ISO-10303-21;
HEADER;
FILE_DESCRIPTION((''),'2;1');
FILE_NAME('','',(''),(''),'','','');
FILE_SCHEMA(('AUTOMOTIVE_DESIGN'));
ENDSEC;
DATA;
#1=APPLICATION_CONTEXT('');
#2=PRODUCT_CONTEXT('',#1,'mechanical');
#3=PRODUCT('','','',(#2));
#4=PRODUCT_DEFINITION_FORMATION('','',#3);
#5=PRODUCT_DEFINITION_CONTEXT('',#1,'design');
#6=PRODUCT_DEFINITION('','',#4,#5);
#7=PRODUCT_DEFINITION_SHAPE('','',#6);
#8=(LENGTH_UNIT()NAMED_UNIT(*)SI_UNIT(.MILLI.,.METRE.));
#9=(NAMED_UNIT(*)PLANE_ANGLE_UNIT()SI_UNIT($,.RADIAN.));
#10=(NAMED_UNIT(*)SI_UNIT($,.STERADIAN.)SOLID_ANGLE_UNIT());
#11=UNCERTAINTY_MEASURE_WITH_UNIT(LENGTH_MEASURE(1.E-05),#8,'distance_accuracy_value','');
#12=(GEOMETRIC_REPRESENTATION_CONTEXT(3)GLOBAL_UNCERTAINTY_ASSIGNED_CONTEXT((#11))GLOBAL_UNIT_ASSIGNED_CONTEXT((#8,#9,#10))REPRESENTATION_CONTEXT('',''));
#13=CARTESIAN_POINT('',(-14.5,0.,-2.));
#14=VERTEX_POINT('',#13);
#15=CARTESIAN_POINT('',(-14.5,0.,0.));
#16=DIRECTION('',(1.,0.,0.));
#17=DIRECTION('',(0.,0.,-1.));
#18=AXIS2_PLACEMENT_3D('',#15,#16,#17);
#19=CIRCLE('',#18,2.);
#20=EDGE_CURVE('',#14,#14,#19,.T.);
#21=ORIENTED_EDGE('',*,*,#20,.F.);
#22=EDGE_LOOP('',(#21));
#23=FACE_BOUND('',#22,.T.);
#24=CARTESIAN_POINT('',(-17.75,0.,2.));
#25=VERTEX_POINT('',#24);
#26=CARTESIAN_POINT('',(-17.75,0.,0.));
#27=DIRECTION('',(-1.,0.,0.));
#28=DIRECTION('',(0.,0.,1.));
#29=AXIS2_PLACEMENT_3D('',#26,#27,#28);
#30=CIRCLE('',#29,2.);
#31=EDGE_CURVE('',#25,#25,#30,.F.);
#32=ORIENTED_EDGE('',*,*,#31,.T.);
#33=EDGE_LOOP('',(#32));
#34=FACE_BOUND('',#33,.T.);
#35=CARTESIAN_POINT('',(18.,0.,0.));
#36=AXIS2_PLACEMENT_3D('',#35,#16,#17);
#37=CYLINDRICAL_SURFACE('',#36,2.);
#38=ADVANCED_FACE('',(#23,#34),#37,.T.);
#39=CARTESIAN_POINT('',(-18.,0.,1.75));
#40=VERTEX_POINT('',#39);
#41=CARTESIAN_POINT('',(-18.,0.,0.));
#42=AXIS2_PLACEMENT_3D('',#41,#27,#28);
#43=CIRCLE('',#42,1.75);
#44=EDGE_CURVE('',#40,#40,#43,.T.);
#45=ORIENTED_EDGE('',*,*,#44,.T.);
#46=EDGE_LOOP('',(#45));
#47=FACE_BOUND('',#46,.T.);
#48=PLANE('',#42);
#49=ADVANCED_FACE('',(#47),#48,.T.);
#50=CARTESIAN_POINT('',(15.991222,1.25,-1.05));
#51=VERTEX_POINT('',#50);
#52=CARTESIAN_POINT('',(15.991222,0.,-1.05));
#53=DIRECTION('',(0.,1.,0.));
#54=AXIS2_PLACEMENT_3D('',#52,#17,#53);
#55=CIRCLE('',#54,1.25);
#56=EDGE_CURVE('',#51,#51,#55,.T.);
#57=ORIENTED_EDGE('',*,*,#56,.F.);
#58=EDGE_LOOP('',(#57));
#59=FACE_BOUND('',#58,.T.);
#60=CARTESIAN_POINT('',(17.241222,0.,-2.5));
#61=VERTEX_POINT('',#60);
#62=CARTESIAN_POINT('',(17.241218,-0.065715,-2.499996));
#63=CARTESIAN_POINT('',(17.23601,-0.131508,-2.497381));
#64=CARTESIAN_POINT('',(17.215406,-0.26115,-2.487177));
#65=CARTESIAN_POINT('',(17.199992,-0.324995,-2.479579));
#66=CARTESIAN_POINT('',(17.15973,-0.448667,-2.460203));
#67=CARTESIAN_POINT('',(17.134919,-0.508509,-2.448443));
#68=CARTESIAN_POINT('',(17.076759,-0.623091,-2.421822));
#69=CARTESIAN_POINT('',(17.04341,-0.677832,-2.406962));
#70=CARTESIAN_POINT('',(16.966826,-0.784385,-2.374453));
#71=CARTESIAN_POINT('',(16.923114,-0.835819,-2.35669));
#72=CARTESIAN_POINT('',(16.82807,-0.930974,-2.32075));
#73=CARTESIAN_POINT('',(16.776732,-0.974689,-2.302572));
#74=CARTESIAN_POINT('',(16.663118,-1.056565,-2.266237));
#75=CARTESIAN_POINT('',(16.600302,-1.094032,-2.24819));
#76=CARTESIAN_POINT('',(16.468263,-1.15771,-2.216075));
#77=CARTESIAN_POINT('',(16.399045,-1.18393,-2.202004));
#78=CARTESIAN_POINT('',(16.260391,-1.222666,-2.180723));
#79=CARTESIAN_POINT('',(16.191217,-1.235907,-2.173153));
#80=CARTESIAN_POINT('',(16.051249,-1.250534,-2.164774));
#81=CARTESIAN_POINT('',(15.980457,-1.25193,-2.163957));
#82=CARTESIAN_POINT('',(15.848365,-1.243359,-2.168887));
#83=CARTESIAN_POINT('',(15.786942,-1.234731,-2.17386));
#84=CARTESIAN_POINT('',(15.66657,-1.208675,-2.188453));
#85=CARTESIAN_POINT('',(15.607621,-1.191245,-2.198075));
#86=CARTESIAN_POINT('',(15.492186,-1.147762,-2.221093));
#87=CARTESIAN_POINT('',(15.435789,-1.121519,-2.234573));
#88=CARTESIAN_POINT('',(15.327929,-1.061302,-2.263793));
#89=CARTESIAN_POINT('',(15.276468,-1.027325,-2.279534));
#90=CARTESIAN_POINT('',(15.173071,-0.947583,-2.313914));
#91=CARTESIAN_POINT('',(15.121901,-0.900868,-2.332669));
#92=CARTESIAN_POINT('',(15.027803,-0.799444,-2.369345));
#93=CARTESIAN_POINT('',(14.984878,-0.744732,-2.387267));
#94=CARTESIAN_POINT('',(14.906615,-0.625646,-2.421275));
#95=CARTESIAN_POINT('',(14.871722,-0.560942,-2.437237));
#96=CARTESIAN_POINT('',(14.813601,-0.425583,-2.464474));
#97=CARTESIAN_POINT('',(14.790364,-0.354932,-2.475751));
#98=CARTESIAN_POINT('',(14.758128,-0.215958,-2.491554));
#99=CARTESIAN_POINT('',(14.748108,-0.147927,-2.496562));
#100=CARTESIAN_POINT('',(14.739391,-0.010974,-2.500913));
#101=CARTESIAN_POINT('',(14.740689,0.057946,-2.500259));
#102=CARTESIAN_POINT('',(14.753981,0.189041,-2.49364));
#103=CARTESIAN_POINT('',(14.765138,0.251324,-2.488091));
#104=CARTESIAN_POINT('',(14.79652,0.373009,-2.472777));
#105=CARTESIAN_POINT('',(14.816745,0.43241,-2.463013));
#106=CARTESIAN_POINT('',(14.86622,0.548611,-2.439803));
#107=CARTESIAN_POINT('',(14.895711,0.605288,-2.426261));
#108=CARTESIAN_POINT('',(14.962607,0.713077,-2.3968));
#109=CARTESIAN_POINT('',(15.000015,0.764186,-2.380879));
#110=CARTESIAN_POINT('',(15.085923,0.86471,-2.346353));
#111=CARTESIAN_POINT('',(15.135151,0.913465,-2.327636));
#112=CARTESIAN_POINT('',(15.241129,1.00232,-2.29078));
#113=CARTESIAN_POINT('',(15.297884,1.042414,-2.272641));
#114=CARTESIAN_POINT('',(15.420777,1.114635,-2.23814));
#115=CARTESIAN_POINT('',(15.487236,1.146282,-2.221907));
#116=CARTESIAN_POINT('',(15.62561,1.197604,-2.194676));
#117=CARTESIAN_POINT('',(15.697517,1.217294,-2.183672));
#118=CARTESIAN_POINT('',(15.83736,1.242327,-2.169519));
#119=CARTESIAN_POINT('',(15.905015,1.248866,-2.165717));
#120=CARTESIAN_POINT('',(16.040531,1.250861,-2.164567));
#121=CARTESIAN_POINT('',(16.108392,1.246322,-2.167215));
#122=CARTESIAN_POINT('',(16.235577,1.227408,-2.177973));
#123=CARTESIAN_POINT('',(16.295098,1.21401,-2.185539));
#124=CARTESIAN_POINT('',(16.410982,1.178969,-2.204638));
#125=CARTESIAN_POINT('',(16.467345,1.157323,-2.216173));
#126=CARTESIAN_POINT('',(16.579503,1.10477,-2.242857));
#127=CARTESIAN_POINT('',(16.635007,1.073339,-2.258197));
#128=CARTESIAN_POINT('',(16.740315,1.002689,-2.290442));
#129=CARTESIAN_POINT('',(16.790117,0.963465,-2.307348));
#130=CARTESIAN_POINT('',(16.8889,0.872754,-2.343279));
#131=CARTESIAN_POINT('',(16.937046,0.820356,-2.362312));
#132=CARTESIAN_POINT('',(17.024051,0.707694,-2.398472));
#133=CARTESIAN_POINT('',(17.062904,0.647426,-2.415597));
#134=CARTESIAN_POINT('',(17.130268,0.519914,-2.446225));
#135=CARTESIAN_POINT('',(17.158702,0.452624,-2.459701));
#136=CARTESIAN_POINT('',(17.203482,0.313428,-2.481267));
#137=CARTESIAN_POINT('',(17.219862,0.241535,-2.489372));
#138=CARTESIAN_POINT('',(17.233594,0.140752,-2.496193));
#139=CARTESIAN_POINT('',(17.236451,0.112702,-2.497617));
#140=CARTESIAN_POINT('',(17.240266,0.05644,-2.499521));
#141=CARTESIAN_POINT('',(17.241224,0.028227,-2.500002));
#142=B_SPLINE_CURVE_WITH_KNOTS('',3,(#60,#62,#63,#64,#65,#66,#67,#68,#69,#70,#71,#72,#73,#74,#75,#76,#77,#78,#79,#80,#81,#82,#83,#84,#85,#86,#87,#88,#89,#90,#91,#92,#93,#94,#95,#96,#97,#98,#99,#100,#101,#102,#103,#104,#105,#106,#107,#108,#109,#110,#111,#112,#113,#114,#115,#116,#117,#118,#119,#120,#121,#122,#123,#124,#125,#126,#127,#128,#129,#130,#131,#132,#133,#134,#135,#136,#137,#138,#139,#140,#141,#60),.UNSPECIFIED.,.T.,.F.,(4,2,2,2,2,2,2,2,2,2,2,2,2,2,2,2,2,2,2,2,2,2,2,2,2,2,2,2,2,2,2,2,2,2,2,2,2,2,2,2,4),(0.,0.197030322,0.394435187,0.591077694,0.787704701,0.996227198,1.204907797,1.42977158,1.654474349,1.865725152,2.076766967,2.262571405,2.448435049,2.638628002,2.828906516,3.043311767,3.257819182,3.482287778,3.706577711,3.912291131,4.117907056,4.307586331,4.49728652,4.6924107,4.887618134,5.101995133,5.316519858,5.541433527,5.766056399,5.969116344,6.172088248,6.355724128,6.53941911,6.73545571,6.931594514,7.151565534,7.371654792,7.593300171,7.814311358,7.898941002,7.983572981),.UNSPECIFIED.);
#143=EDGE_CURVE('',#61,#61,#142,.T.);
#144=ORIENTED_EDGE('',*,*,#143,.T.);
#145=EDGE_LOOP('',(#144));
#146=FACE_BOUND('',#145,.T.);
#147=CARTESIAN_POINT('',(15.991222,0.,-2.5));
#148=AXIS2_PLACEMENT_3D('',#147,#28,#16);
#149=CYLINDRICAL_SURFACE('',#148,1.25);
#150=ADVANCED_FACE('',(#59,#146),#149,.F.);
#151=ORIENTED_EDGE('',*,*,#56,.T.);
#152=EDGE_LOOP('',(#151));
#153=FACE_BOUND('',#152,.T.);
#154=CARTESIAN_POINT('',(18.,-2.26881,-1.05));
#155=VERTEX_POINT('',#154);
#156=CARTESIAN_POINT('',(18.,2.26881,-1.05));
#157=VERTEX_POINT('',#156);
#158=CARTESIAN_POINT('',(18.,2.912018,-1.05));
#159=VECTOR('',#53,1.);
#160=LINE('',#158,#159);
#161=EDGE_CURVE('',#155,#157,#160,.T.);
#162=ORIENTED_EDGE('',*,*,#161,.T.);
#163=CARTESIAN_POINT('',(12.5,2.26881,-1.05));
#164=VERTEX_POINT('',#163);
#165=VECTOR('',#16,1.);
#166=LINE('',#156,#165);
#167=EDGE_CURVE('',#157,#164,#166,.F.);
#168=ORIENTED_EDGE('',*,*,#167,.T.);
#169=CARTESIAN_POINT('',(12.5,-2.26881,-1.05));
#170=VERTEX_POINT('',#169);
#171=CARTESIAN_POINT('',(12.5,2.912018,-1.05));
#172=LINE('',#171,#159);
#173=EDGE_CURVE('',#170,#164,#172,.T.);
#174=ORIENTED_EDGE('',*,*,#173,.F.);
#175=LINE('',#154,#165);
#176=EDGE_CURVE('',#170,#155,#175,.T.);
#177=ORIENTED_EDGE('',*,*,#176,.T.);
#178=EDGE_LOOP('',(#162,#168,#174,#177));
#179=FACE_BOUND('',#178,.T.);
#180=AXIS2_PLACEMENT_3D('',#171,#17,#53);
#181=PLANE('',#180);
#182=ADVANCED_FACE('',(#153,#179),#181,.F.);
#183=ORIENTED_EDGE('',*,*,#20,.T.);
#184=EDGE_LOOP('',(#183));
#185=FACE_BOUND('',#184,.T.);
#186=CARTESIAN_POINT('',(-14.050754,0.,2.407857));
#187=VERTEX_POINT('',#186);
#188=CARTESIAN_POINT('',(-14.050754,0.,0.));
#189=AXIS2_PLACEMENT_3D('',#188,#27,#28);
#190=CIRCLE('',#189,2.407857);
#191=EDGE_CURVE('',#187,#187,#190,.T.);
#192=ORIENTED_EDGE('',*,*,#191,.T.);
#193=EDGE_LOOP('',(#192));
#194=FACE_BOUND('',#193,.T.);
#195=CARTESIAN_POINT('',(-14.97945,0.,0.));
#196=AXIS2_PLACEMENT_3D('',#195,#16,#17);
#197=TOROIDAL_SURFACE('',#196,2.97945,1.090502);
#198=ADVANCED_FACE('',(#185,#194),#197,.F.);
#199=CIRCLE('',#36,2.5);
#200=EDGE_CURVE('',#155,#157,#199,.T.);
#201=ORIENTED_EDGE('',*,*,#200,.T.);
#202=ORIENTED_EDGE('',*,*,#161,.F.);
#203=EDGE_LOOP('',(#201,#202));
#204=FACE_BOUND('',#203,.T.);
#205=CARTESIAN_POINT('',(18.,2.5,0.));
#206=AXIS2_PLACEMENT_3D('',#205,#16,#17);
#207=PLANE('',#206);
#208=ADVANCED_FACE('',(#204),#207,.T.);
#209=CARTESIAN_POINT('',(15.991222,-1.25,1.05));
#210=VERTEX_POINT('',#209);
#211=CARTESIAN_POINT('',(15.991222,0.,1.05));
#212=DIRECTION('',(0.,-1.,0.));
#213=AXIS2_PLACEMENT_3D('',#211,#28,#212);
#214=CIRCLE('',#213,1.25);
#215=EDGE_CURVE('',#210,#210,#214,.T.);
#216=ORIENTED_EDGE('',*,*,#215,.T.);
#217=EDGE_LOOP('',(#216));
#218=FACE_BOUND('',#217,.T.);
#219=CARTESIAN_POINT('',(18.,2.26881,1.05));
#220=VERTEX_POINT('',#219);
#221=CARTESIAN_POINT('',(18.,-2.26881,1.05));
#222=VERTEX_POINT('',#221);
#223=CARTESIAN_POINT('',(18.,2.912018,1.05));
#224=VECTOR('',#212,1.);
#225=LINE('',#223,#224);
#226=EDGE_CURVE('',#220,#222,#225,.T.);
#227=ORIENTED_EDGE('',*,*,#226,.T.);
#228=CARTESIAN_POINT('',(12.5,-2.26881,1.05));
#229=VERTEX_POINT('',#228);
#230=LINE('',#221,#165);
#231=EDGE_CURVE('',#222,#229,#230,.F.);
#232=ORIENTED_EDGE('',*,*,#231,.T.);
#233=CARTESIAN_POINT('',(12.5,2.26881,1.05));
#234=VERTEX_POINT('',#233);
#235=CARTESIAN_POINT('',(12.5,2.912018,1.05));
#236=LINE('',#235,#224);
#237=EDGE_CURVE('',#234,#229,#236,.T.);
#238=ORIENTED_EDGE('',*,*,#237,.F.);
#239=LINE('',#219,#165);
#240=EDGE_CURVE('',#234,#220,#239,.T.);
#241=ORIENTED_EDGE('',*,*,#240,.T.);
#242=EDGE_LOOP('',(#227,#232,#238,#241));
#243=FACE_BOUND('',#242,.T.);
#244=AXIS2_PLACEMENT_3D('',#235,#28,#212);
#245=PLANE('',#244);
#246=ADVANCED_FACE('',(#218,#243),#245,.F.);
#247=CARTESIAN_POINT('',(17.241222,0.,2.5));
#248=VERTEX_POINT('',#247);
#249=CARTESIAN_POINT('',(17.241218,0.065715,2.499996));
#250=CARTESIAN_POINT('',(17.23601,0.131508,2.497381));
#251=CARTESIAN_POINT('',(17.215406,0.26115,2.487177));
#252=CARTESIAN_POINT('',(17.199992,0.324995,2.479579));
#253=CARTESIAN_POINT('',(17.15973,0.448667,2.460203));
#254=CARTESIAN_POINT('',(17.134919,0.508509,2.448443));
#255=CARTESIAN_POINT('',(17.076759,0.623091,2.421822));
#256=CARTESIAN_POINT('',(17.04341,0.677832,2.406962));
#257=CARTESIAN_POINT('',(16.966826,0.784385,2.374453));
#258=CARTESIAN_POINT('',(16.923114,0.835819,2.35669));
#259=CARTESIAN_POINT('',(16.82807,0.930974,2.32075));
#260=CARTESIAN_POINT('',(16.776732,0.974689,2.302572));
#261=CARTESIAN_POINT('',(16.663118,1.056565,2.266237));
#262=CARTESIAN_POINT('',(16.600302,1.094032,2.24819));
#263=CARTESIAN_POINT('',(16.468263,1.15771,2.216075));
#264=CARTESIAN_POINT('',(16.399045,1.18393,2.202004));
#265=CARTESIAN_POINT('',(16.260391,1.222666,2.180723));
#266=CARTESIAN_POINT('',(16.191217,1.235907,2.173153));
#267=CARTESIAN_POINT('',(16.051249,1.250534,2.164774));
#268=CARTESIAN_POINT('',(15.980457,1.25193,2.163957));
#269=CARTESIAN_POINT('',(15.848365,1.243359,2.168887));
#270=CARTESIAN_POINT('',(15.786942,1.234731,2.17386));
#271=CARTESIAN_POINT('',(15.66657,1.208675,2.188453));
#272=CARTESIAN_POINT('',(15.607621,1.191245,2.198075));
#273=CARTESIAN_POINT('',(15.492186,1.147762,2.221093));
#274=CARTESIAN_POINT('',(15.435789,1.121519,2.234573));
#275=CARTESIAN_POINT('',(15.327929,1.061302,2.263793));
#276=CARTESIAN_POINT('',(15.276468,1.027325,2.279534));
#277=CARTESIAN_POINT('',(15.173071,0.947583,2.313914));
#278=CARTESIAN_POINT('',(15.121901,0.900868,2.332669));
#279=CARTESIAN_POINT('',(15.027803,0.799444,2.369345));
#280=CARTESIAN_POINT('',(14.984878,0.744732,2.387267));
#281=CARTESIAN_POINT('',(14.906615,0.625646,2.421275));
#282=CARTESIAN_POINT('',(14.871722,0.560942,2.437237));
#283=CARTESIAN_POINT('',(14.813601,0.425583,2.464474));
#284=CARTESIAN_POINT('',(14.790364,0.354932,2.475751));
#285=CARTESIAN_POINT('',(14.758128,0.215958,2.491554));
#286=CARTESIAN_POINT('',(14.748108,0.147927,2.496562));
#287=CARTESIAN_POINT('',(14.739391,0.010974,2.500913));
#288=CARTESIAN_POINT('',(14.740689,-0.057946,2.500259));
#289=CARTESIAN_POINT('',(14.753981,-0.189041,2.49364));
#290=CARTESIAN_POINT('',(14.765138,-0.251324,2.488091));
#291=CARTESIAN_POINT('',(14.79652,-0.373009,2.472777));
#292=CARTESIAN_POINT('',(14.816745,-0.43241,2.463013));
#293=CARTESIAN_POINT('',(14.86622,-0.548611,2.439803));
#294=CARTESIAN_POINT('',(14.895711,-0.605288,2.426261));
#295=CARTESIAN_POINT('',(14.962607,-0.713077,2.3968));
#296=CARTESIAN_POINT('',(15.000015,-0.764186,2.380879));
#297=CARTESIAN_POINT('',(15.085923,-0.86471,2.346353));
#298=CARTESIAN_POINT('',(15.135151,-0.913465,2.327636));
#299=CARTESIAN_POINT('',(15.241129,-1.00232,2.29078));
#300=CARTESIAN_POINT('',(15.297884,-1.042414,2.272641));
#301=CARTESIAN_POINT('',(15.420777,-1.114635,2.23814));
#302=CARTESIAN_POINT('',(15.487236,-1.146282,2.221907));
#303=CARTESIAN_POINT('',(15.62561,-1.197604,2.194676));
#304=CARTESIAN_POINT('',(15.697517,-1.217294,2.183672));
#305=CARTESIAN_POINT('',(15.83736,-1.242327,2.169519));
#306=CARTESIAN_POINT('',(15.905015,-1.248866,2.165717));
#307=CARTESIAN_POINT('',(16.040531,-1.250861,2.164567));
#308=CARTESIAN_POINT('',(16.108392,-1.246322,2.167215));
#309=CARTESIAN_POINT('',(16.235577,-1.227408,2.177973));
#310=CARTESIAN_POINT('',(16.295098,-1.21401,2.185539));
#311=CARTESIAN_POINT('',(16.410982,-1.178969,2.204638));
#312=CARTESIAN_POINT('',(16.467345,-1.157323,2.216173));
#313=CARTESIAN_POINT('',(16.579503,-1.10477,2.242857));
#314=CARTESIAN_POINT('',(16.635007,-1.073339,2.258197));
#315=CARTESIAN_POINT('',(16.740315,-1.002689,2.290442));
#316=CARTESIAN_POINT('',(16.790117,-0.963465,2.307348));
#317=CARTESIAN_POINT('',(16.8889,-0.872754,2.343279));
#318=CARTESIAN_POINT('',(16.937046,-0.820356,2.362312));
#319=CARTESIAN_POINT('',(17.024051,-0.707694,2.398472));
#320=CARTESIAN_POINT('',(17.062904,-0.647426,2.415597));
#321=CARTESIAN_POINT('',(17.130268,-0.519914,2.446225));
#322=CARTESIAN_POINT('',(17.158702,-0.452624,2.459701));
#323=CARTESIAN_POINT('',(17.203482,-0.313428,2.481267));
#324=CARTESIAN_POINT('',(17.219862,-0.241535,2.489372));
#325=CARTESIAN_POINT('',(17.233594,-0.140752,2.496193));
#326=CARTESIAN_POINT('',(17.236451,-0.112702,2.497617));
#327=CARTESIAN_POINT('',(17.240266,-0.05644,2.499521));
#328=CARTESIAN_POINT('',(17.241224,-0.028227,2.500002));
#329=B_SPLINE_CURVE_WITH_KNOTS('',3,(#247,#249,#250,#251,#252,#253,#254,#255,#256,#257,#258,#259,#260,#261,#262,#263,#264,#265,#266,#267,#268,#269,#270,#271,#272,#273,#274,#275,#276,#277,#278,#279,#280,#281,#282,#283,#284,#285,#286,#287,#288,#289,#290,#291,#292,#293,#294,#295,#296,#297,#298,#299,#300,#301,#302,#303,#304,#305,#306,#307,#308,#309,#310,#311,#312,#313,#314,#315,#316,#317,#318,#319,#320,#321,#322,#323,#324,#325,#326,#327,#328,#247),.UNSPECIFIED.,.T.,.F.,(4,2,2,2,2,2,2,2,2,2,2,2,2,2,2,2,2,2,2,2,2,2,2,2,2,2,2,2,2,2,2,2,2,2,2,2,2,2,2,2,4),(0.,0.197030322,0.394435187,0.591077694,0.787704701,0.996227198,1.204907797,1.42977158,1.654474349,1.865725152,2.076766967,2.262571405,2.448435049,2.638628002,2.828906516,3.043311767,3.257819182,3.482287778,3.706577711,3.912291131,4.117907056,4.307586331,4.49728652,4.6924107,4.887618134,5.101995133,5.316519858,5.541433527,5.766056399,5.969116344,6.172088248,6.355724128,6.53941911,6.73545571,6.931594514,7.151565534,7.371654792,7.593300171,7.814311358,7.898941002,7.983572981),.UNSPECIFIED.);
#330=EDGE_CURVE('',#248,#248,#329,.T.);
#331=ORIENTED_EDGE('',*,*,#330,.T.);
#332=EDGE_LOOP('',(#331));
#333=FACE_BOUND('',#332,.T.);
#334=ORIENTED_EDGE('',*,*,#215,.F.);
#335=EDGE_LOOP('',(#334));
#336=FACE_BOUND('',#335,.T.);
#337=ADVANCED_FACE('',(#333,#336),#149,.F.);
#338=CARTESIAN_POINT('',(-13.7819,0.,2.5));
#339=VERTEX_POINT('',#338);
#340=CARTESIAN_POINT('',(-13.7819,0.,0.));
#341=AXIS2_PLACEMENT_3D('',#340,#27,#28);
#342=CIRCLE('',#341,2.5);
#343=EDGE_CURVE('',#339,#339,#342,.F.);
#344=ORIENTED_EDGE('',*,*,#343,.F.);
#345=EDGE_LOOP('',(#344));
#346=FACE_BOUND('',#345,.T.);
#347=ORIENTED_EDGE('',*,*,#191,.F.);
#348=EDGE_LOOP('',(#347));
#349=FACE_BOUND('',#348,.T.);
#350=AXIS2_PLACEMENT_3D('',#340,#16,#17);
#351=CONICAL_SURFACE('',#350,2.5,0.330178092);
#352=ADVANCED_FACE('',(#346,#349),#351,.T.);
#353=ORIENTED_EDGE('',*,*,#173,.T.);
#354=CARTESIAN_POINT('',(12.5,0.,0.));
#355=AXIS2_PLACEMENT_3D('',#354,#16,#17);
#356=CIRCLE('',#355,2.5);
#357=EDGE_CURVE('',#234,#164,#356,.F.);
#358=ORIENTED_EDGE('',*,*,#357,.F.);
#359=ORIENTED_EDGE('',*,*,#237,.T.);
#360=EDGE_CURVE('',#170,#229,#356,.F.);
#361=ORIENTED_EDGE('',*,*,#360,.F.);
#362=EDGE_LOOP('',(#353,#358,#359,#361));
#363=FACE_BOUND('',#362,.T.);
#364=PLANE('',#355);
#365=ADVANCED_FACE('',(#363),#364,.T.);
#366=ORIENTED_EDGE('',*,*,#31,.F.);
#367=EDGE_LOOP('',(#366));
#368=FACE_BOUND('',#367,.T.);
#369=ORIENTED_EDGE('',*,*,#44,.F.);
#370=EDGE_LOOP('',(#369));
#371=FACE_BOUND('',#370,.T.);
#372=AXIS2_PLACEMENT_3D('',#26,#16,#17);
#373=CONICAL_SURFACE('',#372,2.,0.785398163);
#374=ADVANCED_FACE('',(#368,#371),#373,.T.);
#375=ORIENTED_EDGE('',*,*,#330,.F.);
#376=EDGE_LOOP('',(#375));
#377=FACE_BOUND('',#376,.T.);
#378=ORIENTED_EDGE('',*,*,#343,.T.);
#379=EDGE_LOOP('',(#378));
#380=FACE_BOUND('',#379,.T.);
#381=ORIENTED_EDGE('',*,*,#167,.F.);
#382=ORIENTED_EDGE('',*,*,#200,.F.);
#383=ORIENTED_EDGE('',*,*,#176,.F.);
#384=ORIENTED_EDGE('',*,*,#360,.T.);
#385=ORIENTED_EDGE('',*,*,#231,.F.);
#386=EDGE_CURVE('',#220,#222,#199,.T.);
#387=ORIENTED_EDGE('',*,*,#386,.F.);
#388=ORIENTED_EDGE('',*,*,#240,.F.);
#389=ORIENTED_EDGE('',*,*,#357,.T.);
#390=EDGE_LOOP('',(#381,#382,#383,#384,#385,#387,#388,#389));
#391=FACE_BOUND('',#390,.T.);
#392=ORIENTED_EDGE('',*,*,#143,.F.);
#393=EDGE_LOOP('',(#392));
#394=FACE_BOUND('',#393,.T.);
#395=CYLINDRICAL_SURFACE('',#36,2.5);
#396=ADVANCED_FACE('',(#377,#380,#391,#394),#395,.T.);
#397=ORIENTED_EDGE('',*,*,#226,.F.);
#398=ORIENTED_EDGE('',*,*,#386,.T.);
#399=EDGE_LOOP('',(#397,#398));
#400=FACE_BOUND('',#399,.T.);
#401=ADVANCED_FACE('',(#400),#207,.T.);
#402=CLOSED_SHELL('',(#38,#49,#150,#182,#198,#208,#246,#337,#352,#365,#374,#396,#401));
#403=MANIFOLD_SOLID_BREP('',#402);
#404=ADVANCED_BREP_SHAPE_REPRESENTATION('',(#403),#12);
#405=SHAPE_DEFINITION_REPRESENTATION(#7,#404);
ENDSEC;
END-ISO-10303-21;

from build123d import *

# Parameters (mm, degrees)
SKETCH2_W               = 2.1
SKETCH2_H               = 5.824035358
CUT_EXTRUDE1_DEPTH      = 5.5
CUT_EXTRUDE2_DEPTH      = 19.516276624
CUT_EXTRUDE2_DEPTH_BACK = 19.516276624
SKETCH3_R               = 1.25
CHAMFER1_SIZE           = 0.25
CHAMFER2_SIZE           = 0.218100459


with BuildPart() as part:
    # Sketch1 → Revolve1 (revolve)
    with BuildSketch(Plane.XY, mode=Mode.PRIVATE) as revolve1_sk:
        with BuildLine():
            Line((-18, 2), (-14.5, 2))
            ThreePointArc((-14.5, 2), (-14.208348655, 2.208348655), (-14, 2.5))
            Line((-14, 2.5), (18, 2.5))
            Line((18, 2.5), (18, 0))
            Line((18, 0), (-18, 0))
            Line((-18, 0), (-18, 2))
        make_face()
    revolve(revolve1_sk.sketch.rotate(Axis((18, 0, 0), (-1, 0, 0)), 90), axis=Axis((18, 0, 0), (-1, 0, 0)))

    # Sketch2 → Cut-Extrude1 (cut)
    with BuildSketch(Plane(origin=(18, 0, 0), x_dir=(0, 0, -1), z_dir=(1, 0, 0))):
        Rectangle(SKETCH2_W, SKETCH2_H)
    extrude(amount=-CUT_EXTRUDE1_DEPTH, mode=Mode.SUBTRACT)

    # Sketch3 → Cut-Extrude2 (cut, two sides: drawn at the far end of the back side and taken through both)
    with BuildSketch(Plane.XY.offset(-1.05).offset(-CUT_EXTRUDE2_DEPTH_BACK)):
        with Locations((15.991222224, 0)):
            Circle(SKETCH3_R)
    extrude(amount=CUT_EXTRUDE2_DEPTH + CUT_EXTRUDE2_DEPTH_BACK, mode=Mode.SUBTRACT)

    # Chamfer1
    chamfer1_edges = [part.edges().sort_by_distance(p)[0] for p in [
        (-18, 0, 2),
    ]]
    chamfer(chamfer1_edges, length=CHAMFER1_SIZE)

    # Chamfer2
    # the kernel refuses this chamfer: 0.218100459, 0.1 mm, written as the material it takes off along each edge
    with BuildSketch(Plane(origin=(-14, 0, 0), x_dir=(0, 0, -1), z_dir=(0, 1, 0))) as chamfer2_piece_1:
        with BuildLine():
            Line((2.407857149, 0.050754033), (2.5, -CHAMFER2_SIZE * 0.99999999787))
            Line((2.5, -CHAMFER2_SIZE * 0.99999999787), (2.5, 0))
            ThreePointArc((2.5, 0), (2.450478775, 0.025833705), (2.407857149, 0.050754033))
        make_face()
    revolve(axis=Axis((-14, 0, 0), (-1, 0, 0)), mode=Mode.SUBTRACT)


solid = part.part
